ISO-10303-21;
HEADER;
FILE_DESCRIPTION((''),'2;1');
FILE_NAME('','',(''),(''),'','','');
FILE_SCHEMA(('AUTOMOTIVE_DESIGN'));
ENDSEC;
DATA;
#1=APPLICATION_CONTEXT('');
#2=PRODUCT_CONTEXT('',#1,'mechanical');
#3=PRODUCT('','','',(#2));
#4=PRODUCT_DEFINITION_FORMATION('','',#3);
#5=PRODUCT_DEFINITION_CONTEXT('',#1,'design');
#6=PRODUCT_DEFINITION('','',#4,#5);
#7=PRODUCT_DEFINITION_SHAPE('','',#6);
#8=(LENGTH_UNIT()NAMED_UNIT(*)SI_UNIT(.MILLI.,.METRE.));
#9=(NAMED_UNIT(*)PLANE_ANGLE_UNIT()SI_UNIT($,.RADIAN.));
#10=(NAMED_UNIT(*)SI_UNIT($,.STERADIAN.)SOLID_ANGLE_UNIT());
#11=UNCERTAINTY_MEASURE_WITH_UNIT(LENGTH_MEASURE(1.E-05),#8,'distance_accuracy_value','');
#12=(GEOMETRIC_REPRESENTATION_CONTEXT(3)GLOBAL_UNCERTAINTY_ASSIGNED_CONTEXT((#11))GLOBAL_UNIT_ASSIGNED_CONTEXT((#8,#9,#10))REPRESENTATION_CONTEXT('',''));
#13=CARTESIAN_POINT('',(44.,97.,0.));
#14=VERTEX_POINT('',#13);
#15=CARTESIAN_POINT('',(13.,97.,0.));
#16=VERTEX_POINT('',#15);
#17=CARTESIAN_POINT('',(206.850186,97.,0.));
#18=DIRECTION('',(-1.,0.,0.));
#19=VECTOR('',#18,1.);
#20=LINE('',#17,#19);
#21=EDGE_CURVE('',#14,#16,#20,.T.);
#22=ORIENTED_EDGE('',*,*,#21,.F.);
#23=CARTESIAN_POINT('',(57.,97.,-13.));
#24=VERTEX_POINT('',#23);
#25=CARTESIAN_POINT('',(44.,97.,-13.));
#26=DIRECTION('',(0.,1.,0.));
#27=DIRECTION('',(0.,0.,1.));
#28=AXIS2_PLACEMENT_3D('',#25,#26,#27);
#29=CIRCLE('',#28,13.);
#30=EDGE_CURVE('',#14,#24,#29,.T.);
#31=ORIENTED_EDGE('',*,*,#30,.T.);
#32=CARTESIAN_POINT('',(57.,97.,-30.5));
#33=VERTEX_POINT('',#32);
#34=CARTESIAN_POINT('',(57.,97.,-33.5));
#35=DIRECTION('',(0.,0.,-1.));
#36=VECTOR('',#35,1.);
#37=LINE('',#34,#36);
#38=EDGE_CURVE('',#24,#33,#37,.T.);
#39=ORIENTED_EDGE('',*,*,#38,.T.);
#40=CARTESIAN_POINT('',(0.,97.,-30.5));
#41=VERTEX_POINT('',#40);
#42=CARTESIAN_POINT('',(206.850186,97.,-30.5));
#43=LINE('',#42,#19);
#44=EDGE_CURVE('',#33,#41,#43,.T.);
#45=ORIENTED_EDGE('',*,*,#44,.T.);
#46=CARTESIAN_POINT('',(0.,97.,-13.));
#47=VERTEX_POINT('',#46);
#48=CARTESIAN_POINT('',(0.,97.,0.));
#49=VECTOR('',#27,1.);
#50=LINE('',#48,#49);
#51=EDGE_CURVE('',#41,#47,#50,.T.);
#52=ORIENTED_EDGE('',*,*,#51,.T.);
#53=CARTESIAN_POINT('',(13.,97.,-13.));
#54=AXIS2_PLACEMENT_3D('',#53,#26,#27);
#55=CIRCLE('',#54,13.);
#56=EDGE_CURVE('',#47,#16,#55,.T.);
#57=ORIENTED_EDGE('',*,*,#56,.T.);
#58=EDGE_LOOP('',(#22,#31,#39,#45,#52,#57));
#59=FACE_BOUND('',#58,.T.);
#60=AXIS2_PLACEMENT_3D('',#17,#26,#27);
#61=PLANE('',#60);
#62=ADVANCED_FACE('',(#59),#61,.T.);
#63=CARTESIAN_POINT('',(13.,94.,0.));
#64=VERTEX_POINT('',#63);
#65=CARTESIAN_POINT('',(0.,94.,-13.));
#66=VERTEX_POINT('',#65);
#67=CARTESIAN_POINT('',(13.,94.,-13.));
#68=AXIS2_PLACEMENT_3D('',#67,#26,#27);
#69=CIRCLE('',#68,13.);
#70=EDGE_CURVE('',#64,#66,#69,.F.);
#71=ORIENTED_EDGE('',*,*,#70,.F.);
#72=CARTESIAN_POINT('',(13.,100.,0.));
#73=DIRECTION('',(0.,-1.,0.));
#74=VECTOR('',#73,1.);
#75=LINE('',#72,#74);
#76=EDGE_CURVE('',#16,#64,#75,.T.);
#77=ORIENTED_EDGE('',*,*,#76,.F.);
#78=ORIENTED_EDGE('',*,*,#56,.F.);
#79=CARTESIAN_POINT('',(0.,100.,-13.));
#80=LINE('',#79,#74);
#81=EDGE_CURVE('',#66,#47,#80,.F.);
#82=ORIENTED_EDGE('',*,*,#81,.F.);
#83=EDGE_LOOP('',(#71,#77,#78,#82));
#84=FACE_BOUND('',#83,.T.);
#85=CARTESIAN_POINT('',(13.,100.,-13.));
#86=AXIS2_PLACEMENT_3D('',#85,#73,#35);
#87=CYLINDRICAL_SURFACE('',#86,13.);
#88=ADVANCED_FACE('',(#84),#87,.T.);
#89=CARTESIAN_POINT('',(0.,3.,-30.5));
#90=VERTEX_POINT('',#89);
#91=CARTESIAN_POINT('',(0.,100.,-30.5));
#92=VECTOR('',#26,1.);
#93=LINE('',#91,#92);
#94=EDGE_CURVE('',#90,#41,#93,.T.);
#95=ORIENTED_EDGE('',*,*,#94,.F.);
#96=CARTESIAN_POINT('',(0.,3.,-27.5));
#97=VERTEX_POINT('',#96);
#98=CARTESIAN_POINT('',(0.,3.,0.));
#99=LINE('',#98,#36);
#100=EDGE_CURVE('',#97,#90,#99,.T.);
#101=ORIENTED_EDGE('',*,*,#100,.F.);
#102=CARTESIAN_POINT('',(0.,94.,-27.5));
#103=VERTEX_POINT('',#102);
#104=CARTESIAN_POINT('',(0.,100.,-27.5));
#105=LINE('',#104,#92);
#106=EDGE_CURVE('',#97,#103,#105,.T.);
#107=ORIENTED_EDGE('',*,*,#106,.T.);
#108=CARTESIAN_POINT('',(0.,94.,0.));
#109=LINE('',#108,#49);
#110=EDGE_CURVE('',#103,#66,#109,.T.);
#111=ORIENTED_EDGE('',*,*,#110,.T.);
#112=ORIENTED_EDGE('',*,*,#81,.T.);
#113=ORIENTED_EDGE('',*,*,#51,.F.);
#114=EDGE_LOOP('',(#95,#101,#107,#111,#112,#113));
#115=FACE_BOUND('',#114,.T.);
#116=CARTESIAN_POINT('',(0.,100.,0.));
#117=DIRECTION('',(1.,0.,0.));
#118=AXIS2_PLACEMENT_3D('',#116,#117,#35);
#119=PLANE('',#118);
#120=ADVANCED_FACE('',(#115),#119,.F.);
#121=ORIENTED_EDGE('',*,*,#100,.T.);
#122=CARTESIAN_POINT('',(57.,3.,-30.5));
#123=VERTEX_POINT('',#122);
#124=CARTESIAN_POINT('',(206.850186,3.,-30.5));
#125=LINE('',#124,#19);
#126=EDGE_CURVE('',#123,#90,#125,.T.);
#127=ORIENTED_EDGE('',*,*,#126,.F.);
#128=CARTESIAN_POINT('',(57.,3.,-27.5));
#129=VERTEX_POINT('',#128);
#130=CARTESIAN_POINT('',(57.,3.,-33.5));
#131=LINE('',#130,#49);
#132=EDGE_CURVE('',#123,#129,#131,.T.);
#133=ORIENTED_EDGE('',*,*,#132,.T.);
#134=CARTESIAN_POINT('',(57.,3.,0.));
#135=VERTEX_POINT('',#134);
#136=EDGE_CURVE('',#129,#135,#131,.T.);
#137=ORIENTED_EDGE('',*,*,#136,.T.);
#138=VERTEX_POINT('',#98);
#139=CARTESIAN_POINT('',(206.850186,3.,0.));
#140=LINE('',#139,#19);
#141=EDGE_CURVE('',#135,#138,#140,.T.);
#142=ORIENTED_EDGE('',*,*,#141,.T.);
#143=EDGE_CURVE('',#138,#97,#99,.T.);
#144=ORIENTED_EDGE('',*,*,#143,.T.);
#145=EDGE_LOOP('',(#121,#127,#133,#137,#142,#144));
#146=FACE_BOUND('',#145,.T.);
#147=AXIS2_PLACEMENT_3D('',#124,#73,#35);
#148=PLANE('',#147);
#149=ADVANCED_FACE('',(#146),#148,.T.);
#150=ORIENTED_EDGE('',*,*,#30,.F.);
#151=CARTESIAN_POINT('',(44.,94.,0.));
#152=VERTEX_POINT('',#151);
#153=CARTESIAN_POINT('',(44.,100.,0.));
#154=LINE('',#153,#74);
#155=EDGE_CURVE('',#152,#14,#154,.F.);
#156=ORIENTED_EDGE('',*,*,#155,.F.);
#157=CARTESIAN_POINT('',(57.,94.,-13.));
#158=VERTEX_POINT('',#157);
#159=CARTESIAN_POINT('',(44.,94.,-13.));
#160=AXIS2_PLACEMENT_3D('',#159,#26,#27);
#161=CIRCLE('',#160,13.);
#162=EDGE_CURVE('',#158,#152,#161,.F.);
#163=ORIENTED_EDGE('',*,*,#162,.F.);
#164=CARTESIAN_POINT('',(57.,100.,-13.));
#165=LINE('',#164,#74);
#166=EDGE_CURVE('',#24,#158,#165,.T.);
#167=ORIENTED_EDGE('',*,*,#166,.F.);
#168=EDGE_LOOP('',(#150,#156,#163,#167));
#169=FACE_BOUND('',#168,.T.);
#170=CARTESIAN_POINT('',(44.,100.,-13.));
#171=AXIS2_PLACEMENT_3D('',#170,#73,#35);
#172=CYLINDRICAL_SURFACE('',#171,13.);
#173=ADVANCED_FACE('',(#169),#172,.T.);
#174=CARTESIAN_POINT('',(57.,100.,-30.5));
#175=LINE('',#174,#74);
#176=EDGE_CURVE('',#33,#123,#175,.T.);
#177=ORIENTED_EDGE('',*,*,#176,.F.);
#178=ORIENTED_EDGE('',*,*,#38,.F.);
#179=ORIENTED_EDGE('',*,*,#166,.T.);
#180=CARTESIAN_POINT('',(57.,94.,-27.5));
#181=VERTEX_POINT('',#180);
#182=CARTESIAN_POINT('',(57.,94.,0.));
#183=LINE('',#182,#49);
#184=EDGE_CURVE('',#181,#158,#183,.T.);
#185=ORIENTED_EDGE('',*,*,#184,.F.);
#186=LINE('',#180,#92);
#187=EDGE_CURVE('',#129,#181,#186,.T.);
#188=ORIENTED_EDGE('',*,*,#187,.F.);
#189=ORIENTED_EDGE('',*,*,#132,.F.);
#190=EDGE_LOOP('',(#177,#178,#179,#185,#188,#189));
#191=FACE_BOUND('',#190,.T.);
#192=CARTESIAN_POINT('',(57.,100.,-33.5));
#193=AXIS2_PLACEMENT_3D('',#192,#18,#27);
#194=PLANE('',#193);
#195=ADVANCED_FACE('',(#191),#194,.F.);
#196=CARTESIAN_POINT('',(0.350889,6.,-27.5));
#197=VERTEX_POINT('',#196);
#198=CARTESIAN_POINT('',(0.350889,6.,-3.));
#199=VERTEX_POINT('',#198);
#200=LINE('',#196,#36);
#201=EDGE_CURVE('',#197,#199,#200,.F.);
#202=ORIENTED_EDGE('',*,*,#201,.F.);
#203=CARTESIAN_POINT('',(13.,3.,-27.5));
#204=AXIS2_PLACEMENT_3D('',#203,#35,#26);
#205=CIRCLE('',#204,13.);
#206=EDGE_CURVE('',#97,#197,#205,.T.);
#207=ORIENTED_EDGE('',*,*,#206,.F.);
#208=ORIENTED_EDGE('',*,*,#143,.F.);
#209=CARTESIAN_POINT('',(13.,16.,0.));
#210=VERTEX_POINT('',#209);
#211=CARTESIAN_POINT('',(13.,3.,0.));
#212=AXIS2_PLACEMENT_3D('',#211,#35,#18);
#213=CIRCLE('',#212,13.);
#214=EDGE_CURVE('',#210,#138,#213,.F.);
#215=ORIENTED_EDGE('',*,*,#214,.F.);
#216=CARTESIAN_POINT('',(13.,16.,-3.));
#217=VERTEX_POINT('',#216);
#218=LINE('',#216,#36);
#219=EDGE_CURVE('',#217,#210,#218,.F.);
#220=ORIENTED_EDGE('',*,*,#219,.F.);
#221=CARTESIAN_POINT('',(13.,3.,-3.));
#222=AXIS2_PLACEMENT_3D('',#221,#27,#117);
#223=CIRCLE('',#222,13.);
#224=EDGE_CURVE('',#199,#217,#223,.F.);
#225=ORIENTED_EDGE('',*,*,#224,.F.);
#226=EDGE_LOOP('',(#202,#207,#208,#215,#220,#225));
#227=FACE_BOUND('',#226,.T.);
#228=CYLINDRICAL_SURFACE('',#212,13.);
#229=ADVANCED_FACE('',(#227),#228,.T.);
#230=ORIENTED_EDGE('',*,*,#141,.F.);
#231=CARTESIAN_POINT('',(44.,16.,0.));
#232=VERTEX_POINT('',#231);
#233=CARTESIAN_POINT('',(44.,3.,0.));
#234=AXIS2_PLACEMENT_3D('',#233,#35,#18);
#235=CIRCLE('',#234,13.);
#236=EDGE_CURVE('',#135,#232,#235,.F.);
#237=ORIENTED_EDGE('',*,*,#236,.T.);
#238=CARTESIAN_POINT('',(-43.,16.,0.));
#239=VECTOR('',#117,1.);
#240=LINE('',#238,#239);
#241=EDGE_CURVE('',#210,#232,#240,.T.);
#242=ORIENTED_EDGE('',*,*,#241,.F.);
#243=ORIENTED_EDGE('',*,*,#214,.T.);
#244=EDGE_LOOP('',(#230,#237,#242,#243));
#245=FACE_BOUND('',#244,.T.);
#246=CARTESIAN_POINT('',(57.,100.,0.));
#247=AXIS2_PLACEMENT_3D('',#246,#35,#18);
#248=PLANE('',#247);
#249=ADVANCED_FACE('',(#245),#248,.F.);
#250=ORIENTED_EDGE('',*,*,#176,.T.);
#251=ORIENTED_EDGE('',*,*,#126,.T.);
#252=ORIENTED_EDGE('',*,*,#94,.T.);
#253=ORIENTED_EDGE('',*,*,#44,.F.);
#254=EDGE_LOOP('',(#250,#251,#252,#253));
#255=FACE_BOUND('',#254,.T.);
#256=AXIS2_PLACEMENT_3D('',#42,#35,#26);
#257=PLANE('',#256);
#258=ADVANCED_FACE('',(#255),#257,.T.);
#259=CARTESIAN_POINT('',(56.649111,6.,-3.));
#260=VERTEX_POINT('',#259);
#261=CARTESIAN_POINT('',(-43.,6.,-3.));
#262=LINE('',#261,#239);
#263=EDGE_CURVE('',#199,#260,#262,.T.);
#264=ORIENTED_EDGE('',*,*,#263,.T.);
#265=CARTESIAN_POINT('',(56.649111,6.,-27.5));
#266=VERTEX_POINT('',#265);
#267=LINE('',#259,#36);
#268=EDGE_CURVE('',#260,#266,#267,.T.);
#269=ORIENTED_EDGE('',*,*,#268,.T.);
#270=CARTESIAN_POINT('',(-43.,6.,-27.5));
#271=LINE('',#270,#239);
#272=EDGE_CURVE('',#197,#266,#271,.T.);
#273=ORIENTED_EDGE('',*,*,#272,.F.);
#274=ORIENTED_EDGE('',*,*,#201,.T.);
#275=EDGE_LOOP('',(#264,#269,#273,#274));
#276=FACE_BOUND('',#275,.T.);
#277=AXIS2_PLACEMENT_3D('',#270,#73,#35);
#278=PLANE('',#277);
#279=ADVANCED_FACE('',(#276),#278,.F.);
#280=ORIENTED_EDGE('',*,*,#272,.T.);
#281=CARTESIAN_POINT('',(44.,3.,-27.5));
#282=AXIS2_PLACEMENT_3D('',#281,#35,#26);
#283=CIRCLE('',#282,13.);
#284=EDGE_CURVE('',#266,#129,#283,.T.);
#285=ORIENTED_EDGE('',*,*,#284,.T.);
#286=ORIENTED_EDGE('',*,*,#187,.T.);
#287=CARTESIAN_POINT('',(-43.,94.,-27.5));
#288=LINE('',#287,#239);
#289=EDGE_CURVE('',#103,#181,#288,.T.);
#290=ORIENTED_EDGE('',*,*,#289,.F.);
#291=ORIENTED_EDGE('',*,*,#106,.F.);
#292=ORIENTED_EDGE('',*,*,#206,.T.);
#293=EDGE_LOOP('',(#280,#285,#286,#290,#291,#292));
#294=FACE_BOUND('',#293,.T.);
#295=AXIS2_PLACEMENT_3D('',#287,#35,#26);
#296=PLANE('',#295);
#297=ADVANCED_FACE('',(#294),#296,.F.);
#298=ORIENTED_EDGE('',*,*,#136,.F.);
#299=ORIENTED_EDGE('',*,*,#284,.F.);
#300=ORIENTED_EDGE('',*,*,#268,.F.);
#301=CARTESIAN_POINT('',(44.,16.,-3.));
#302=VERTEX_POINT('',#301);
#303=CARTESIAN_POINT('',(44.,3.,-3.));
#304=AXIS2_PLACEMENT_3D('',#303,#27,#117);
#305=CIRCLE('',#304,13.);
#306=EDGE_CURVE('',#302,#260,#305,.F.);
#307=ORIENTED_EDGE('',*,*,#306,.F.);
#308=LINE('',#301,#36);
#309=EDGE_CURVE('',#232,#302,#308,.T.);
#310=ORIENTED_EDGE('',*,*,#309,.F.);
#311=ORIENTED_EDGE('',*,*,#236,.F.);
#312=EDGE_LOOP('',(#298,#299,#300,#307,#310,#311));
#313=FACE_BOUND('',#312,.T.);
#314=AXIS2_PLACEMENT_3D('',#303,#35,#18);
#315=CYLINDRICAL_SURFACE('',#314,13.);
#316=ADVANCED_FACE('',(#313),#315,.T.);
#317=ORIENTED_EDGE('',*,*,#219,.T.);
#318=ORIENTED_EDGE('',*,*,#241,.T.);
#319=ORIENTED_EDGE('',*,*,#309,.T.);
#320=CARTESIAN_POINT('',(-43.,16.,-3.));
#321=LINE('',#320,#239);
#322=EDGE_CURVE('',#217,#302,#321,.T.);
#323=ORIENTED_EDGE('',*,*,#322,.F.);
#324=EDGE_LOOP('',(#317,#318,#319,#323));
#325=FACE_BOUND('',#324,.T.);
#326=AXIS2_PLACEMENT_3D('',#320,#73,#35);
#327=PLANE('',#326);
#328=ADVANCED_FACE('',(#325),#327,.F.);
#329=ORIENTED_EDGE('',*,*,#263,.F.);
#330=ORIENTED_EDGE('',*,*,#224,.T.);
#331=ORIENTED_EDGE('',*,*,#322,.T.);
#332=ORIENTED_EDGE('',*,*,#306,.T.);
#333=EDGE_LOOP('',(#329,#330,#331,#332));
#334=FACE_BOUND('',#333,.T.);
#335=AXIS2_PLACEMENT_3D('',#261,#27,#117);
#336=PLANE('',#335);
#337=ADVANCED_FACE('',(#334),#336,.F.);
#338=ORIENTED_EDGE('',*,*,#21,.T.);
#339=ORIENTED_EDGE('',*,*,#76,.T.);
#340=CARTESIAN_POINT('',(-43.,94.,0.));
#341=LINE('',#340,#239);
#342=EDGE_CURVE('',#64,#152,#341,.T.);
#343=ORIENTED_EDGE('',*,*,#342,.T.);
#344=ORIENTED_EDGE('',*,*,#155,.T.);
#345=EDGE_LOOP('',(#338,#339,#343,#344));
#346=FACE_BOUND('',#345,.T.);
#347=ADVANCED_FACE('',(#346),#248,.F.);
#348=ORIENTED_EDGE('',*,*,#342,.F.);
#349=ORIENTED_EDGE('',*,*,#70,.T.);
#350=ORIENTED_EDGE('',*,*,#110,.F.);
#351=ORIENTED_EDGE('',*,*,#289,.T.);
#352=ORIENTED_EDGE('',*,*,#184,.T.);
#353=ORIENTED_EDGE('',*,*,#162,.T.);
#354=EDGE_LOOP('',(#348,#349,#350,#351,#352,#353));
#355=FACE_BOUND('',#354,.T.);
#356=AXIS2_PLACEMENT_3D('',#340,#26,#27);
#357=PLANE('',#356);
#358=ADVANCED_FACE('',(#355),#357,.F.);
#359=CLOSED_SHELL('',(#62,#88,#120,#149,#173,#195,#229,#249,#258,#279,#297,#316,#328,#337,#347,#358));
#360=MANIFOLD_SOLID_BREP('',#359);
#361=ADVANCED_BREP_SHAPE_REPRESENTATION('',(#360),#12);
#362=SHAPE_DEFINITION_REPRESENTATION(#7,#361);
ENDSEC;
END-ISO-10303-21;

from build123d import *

# Parameters (mm, degrees)
SKETCH2_W               = 57
SKETCH2_H               = 33.5
BOSS_EXTRUDE1_DEPTH     = 100
CUT_EXTRUDE3_DEPTH      = 120.880148482
CUT_EXTRUDE3_DEPTH_BACK = 120.880148482
CUT_EXTRUDE5_DEPTH      = 100
FILLET2_R               = 13


with BuildPart() as part:
    # Sketch2 → Boss-Extrude1 (new body)
    with BuildSketch(Plane(origin=(0, 0, 0), x_dir=(1, 0, 0), z_dir=(0, 1, 0))):
        with Locations((28.5, 16.75)):
            Rectangle(SKETCH2_W, SKETCH2_H)
    extrude(amount=BOSS_EXTRUDE1_DEPTH)

    # Sketch3 → Cut-Extrude3 (cut, two sides: drawn at the far end of the back side and taken through both)
    with BuildSketch(Plane(origin=(57, 0, 0), x_dir=(0, 0, -1), z_dir=(1, 0, 0)).offset(-CUT_EXTRUDE3_DEPTH_BACK)):
        Polygon((0, 100), (0, 97), (30.5, 97), (30.5, 3), (0, 3), (0, 0), (33.5, 0), (33.5, 100), align=None)
    extrude(amount=CUT_EXTRUDE3_DEPTH + CUT_EXTRUDE3_DEPTH_BACK, mode=Mode.SUBTRACT)

    # Sketch4 → Cut-Extrude5 (cut)
    with BuildSketch(Plane(origin=(57, 0, 0), x_dir=(0, 0, -1), z_dir=(1, 0, 0))):
        Polygon((0, 94), (27.5, 94), (27.5, 6), (3, 6), (3, 16), (0, 16), align=None)
    extrude(amount=-CUT_EXTRUDE5_DEPTH, mode=Mode.SUBTRACT)

    # Fillet2
    # the kernel refuses this fillet: 13 mm, written as the material it takes off along each edge
    with BuildSketch(Plane(origin=(0, 61.5, 0), x_dir=(0, 0, -1), z_dir=(0, 1, 0)), Plane(origin=(57, 61.5, 0), x_dir=(-1, 0, 0), z_dir=(0, 1, 0))) as fillet2_piece_1:
        with BuildLine():
            CenterArc((FILLET2_R, -FILLET2_R), FILLET2_R, 90, 90)
            Line((0, -FILLET2_R), (0, 0))
            Line((0, 0), (FILLET2_R, 0))
        make_face()
    extrude(amount=68, mode=Mode.SUBTRACT)
    with BuildSketch(Plane(origin=(57, 16, -35.5), x_dir=(-1, 0, 0), z_dir=(0, 0, 1))) as fillet2_piece_2_section:
        with BuildLine():
            CenterArc((FILLET2_R, FILLET2_R), FILLET2_R, 180, 90)
            Line((0, FILLET2_R), (0, 0))
            Line((0, 0), (FILLET2_R, 0))
        make_face()
    fillet2_piece_2 = extrude(amount=68, mode=Mode.PRIVATE)
    fillet2_piece_2 = split(fillet2_piece_2, bisect_by=Plane(origin=(56.894981294, 5.25203924, -27.5), z_dir=(0, 0, 1)), keep=Keep.TOP, mode=Mode.PRIVATE)
    add(fillet2_piece_2, mode=Mode.SUBTRACT)
    with BuildSketch(Plane(origin=(0, 16, 32.5), x_dir=(0, -1, 0), z_dir=(0, 0, -1))) as fillet2_piece_3_section:
        with BuildLine():
            CenterArc((FILLET2_R, -FILLET2_R), FILLET2_R, 90, 90)
            Line((0, -FILLET2_R), (0, 0))
            Line((0, 0), (FILLET2_R, 0))
        make_face()
    fillet2_piece_3 = extrude(amount=68, mode=Mode.PRIVATE)
    fillet2_piece_3 = split(fillet2_piece_3, bisect_by=Plane(origin=(0.105018706, 5.25203924, -27.5), z_dir=(0, 0, 1)), keep=Keep.TOP, mode=Mode.PRIVATE)
    add(fillet2_piece_3, mode=Mode.SUBTRACT)


solid = part.part
